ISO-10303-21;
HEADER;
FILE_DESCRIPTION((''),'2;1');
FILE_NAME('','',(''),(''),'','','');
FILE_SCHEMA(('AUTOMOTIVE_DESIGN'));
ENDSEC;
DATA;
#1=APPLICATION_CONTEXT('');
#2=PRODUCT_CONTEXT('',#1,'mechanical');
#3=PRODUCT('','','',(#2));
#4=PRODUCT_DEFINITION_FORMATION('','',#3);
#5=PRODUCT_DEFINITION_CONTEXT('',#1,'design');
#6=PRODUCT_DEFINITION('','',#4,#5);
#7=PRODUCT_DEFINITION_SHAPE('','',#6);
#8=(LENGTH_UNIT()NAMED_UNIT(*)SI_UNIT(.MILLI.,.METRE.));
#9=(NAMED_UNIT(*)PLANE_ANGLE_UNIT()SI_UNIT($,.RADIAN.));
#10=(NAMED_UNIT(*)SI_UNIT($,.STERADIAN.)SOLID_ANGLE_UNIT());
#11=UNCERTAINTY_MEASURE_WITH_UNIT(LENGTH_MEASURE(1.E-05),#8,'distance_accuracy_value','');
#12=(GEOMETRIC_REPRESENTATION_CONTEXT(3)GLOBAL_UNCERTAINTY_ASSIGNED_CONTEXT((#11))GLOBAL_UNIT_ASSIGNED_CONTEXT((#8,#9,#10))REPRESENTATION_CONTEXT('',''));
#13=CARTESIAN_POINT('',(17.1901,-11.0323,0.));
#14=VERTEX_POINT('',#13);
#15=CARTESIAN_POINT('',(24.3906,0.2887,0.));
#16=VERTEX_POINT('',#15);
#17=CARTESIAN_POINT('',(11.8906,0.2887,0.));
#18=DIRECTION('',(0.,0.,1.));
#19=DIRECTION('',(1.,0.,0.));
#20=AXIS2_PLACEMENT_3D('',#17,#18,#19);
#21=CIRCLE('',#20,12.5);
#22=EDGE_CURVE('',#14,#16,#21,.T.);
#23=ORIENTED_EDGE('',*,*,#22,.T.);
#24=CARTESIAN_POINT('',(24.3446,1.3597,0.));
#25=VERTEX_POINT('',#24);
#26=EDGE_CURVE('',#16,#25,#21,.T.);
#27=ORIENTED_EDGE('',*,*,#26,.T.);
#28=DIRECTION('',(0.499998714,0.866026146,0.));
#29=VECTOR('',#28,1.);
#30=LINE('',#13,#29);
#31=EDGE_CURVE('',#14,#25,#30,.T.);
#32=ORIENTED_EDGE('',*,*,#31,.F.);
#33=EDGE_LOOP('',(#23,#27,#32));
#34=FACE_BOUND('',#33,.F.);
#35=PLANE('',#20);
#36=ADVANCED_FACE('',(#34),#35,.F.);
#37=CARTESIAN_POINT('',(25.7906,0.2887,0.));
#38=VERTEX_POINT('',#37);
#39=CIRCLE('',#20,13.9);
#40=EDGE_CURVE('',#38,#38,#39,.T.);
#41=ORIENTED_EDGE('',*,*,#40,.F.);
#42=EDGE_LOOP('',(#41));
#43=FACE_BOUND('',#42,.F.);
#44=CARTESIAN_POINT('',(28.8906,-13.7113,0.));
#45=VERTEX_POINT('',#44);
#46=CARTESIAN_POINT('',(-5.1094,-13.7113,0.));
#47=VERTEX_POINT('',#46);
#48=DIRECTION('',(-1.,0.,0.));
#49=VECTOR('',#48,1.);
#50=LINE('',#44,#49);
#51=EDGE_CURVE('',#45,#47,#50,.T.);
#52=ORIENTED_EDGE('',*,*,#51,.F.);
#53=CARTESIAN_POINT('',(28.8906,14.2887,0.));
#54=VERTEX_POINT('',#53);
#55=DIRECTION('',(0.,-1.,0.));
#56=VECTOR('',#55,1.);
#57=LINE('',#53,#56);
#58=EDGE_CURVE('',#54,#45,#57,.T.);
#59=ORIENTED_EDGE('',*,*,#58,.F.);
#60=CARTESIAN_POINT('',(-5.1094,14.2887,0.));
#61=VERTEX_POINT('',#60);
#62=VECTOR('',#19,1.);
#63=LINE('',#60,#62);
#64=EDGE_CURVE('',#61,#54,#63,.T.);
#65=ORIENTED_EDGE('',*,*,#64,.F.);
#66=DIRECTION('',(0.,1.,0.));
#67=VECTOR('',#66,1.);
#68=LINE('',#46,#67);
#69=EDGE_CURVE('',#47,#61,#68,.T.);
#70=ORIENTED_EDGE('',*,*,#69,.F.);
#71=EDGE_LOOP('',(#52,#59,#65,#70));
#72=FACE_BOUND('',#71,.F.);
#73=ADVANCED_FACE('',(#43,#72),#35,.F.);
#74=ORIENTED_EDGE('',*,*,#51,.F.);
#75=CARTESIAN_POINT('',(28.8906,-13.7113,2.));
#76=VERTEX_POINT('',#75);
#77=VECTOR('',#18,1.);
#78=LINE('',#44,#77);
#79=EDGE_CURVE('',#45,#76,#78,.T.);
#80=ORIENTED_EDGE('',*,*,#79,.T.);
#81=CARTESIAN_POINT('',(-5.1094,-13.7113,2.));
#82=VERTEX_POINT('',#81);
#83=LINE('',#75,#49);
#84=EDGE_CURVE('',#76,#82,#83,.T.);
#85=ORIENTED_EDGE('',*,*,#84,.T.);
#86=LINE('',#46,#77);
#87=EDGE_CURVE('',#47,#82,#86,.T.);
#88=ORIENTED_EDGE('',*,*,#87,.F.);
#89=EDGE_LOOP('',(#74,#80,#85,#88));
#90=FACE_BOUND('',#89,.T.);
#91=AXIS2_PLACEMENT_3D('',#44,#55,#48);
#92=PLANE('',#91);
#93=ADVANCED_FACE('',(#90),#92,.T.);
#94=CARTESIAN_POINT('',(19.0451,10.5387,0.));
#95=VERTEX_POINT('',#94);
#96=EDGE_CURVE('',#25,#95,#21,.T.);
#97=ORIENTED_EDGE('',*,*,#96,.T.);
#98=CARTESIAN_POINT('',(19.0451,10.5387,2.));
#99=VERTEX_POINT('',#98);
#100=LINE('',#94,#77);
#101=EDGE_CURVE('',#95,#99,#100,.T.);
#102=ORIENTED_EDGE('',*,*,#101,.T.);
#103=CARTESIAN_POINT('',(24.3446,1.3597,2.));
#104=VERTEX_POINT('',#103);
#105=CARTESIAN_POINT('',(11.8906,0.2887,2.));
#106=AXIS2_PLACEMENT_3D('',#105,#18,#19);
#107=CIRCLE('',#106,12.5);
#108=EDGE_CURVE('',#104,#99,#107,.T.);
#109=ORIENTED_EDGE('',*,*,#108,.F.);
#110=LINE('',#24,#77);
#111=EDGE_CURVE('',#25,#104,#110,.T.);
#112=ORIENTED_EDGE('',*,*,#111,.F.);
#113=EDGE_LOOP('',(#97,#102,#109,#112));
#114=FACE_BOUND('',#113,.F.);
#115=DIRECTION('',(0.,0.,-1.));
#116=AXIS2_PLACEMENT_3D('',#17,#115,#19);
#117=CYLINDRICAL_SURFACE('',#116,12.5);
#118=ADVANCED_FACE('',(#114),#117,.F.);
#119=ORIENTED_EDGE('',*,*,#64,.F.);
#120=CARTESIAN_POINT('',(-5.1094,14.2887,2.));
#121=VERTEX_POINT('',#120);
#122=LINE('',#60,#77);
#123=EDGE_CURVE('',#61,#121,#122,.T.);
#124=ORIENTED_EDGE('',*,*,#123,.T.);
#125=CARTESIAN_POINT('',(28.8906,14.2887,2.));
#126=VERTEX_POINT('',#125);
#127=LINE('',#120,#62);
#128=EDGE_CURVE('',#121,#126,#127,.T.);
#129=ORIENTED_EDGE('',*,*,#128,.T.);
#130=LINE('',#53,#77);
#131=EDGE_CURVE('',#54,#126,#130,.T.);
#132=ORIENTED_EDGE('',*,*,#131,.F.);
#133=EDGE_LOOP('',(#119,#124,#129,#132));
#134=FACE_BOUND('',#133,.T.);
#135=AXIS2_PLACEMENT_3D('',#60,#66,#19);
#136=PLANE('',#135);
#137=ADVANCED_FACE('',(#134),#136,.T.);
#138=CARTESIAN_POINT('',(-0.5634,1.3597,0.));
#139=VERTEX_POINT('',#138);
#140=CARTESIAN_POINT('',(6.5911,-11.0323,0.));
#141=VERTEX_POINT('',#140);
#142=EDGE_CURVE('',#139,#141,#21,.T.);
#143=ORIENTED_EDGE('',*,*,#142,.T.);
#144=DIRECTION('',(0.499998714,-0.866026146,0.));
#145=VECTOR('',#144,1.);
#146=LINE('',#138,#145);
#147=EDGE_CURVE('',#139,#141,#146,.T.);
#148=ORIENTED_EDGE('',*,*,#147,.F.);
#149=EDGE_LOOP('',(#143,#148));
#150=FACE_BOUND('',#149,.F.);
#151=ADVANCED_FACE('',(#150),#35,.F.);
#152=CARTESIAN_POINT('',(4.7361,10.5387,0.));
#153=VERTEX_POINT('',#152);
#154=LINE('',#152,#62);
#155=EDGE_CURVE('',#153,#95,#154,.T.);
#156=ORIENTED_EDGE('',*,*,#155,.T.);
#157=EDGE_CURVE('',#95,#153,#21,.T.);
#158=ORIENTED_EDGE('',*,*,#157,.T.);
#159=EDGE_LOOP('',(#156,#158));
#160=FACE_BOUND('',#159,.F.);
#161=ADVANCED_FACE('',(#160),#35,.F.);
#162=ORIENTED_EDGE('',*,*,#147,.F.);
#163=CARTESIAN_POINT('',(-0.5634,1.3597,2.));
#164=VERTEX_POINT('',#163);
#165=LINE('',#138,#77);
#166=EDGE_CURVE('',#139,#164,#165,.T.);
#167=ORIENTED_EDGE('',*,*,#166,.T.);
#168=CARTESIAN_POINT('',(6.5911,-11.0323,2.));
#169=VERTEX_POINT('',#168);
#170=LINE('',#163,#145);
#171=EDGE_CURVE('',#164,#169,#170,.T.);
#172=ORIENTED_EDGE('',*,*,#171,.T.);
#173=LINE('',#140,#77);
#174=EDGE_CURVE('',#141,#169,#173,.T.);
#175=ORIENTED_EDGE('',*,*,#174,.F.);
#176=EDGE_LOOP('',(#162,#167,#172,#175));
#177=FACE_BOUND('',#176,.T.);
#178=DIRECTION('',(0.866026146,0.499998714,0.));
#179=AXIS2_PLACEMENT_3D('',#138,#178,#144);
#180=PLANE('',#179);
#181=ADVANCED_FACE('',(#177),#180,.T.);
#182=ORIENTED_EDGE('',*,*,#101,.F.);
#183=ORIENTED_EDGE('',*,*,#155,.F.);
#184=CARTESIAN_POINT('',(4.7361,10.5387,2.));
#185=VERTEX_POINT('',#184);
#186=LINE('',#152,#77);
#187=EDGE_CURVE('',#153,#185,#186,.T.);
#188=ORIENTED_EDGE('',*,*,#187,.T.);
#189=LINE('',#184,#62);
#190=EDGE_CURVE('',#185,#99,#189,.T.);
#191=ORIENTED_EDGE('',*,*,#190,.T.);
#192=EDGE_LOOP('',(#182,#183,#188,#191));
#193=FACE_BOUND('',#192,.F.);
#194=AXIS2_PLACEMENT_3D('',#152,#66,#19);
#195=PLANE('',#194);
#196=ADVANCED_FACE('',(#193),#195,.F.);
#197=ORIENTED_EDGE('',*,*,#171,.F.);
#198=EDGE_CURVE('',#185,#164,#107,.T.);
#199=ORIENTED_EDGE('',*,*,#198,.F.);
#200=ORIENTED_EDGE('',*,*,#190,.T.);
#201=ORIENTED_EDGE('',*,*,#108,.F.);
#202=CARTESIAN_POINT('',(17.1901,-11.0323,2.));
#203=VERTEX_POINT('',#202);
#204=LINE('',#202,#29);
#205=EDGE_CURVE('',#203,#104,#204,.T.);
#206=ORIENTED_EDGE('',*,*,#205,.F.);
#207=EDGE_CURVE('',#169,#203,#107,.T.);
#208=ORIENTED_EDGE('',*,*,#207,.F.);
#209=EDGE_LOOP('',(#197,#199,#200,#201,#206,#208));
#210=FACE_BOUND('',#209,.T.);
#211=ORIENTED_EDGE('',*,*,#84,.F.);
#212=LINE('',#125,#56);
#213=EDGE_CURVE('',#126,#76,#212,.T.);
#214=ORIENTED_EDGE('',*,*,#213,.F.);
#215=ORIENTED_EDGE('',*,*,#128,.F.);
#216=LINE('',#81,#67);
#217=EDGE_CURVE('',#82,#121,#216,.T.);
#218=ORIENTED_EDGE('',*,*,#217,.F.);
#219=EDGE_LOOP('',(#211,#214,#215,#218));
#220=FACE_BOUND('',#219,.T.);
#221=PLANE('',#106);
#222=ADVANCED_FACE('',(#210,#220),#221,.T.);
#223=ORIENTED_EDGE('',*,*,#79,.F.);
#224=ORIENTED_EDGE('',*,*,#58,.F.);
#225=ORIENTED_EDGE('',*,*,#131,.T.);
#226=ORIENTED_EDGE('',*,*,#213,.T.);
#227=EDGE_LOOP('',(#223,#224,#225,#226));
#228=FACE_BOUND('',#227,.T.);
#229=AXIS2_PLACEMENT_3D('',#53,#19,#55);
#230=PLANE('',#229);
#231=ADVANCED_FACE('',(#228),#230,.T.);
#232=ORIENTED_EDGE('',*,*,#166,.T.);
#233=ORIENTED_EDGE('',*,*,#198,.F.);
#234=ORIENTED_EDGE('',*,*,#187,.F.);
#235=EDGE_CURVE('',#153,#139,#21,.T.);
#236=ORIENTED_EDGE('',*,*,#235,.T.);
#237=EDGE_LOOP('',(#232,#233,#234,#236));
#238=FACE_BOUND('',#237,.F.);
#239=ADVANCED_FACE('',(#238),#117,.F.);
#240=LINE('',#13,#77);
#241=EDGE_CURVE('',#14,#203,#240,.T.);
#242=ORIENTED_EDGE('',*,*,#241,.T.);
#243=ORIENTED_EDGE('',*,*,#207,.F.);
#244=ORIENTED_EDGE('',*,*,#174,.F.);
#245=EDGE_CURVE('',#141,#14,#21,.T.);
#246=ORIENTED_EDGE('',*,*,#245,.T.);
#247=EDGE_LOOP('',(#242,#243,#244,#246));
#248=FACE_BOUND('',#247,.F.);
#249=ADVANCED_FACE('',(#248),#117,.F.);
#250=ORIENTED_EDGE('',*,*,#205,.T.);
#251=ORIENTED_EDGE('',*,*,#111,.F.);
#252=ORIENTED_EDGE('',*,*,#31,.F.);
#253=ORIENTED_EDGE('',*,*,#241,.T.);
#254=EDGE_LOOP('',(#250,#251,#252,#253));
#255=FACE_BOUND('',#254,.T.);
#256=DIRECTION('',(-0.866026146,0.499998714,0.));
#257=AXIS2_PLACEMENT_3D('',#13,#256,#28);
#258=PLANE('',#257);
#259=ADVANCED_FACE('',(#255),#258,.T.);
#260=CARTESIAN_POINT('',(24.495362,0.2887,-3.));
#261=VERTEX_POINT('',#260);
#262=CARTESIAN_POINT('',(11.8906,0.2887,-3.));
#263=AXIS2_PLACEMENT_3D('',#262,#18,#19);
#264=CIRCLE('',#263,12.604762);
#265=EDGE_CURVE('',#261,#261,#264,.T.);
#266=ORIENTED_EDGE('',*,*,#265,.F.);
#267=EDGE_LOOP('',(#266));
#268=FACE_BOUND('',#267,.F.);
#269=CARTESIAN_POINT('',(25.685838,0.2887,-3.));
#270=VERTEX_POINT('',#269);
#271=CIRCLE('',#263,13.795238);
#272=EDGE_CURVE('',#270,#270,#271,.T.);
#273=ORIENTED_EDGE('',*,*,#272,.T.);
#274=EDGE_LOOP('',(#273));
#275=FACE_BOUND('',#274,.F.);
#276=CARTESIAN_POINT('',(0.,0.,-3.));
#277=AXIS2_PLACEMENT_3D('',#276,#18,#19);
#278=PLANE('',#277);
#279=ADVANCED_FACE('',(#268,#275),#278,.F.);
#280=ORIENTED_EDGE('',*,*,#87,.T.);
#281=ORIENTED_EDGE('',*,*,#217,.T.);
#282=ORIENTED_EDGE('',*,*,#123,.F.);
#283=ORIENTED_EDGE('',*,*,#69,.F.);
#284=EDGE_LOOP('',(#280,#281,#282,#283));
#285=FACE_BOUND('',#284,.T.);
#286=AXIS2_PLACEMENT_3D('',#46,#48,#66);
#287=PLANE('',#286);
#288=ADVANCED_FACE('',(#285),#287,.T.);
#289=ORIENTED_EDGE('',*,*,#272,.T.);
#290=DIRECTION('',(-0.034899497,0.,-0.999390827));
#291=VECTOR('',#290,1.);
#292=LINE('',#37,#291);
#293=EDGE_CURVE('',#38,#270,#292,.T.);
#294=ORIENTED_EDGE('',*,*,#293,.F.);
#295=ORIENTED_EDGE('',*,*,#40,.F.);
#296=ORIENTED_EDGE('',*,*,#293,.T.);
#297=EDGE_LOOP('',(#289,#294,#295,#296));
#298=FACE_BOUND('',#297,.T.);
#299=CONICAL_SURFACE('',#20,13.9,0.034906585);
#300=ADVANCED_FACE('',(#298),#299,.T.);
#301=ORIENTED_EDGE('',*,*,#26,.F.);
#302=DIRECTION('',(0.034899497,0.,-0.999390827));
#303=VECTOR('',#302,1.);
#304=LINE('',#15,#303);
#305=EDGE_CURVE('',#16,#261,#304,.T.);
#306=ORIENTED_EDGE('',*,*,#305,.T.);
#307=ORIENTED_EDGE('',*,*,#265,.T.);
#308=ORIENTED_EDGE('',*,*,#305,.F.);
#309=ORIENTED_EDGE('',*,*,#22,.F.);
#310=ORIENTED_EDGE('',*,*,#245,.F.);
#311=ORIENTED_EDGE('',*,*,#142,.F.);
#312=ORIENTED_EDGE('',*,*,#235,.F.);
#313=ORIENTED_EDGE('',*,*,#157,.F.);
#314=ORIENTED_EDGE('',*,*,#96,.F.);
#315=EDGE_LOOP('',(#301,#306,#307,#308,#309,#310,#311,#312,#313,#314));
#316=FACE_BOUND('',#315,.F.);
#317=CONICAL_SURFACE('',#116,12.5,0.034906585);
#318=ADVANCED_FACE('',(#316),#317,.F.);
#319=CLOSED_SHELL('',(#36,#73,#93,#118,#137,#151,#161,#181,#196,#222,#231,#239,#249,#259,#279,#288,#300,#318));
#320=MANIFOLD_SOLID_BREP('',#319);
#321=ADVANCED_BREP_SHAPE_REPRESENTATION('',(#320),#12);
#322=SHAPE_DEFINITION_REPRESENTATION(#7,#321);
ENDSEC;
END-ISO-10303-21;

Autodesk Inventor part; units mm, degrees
ref_plane "YZ Plane" through (0, 0, 0) normal (1, 0, 0) x (0, 1, 0)
ref_plane "XZ Plane" through (0, 0, 0) normal (0, 1, 0) x (-1, 0, 0)
ref_plane "XY Plane" through (0, 0, 0) normal (0, 0, 1) x (1, 0, 0)
ref_plane "Work Plane1" through (0, 0, 0) normal (0, 0, 1) x (1, 0, 0)
sketch "Sketch1" plane through (0, 0, 0) normal (0, 0, 1) x (1, 0, 0)
  circle A0 centre (11.8906, 0.2887) radius 14 construction
  line L0 (-4.1094, 7.6362) -> (-12.7094, 0.2473) construction
  line L1 (-5.7094, 0.2473) -> (-12.7094, 0.2473) construction
  line L2 (-5.7094, -6.0861) -> (-5.7094, 0.2473) construction
  line L3 (-6.0301, -6.0861) -> (-5.7094, -6.0861) construction
  line L4 (-6.0301, -6.0861) -> (-4.1094, -7.5697) construction
  line L5 (-4.1094, -7.5697) -> (-4.1094, -15.7113) construction
  line L6 (-4.1094, -15.7113) -> (27.8906, -15.7113) construction
  line L7 (27.8906, -15.7113) -> (27.8906, -7.5697) construction
  line L8 (29.8113, -6.0861) -> (27.8906, -7.5697) construction
  line L9 (29.4906, -6.0861) -> (29.8113, -6.0861) construction
  line L10 (29.4906, 0.2473) -> (29.4906, -6.0861) construction
  line L11 (36.4906, 0.2473) -> (29.4906, 0.2473) construction
  line L12 (27.8906, 7.6362) -> (36.4906, 0.2473) construction
  line L13 (27.8906, 7.6362) -> (27.8906, 16.2887) construction
  line L14 (27.8906, 16.2887) -> (-4.1094, 16.2887) construction
  line L15 (-4.1094, 16.2887) -> (-4.1094, 7.6362) construction
  circle A1 centre (11.8906, 0.2887) radius 13.9
  circle A2 centre (11.8906, 0.2887) radius 12.5
  point P0 (0, 0)
  dimension "d0" = 27.8
  dimension "d1" = 25
extrude "Extrusion1" add sketch "Sketch1" against normal blind 3 draft -2
sketch "Sketch2" plane through (11.8906, 0.2887, 0) normal (0, 0, 1) x (1, 0, 0)
  circle A0 centre (0, 0) radius 13.9 projected
  circle A1 centre (0, 0) radius 12.5 projected
  line L0 (17, -14) -> (-17, -14)
  line L1 (-17, -14) -> (-17, 14)
  line L2 (-17, 14) -> (17, 14)
  line L3 (17, 14) -> (17, -14)
  line L4 (17, -14) -> (-17, 14) construction
  line L5 (-17, -14) -> (17, 14) construction
  circle A2 centre (0, 0) radius 10.25 construction
  line L6 (-7.1545, 10.25) -> (7.1545, 10.25)
  line L7 (-12.454, 1.071) -> (-5.2995, -11.321)
  line L8 (5.2995, -11.321) -> (12.454, 1.071)
  point P0 (-11.8906, -0.2887)
  dimension "d4" = 34
  dimension "d5" = 28
  dimension "d8" = 20.5
  dimension "d9" = 60
  dimension "d10" = 60
  dimension "d11" = 0
extrude "Extrusion2" add sketch "Sketch2" along normal blind 2 contours A0 | A1 L8 | L6 A1 | A1 L7 | L0 L1 L2 L3
properties part number "20_Cube_Insert_Z-Focus_objectivemount"
